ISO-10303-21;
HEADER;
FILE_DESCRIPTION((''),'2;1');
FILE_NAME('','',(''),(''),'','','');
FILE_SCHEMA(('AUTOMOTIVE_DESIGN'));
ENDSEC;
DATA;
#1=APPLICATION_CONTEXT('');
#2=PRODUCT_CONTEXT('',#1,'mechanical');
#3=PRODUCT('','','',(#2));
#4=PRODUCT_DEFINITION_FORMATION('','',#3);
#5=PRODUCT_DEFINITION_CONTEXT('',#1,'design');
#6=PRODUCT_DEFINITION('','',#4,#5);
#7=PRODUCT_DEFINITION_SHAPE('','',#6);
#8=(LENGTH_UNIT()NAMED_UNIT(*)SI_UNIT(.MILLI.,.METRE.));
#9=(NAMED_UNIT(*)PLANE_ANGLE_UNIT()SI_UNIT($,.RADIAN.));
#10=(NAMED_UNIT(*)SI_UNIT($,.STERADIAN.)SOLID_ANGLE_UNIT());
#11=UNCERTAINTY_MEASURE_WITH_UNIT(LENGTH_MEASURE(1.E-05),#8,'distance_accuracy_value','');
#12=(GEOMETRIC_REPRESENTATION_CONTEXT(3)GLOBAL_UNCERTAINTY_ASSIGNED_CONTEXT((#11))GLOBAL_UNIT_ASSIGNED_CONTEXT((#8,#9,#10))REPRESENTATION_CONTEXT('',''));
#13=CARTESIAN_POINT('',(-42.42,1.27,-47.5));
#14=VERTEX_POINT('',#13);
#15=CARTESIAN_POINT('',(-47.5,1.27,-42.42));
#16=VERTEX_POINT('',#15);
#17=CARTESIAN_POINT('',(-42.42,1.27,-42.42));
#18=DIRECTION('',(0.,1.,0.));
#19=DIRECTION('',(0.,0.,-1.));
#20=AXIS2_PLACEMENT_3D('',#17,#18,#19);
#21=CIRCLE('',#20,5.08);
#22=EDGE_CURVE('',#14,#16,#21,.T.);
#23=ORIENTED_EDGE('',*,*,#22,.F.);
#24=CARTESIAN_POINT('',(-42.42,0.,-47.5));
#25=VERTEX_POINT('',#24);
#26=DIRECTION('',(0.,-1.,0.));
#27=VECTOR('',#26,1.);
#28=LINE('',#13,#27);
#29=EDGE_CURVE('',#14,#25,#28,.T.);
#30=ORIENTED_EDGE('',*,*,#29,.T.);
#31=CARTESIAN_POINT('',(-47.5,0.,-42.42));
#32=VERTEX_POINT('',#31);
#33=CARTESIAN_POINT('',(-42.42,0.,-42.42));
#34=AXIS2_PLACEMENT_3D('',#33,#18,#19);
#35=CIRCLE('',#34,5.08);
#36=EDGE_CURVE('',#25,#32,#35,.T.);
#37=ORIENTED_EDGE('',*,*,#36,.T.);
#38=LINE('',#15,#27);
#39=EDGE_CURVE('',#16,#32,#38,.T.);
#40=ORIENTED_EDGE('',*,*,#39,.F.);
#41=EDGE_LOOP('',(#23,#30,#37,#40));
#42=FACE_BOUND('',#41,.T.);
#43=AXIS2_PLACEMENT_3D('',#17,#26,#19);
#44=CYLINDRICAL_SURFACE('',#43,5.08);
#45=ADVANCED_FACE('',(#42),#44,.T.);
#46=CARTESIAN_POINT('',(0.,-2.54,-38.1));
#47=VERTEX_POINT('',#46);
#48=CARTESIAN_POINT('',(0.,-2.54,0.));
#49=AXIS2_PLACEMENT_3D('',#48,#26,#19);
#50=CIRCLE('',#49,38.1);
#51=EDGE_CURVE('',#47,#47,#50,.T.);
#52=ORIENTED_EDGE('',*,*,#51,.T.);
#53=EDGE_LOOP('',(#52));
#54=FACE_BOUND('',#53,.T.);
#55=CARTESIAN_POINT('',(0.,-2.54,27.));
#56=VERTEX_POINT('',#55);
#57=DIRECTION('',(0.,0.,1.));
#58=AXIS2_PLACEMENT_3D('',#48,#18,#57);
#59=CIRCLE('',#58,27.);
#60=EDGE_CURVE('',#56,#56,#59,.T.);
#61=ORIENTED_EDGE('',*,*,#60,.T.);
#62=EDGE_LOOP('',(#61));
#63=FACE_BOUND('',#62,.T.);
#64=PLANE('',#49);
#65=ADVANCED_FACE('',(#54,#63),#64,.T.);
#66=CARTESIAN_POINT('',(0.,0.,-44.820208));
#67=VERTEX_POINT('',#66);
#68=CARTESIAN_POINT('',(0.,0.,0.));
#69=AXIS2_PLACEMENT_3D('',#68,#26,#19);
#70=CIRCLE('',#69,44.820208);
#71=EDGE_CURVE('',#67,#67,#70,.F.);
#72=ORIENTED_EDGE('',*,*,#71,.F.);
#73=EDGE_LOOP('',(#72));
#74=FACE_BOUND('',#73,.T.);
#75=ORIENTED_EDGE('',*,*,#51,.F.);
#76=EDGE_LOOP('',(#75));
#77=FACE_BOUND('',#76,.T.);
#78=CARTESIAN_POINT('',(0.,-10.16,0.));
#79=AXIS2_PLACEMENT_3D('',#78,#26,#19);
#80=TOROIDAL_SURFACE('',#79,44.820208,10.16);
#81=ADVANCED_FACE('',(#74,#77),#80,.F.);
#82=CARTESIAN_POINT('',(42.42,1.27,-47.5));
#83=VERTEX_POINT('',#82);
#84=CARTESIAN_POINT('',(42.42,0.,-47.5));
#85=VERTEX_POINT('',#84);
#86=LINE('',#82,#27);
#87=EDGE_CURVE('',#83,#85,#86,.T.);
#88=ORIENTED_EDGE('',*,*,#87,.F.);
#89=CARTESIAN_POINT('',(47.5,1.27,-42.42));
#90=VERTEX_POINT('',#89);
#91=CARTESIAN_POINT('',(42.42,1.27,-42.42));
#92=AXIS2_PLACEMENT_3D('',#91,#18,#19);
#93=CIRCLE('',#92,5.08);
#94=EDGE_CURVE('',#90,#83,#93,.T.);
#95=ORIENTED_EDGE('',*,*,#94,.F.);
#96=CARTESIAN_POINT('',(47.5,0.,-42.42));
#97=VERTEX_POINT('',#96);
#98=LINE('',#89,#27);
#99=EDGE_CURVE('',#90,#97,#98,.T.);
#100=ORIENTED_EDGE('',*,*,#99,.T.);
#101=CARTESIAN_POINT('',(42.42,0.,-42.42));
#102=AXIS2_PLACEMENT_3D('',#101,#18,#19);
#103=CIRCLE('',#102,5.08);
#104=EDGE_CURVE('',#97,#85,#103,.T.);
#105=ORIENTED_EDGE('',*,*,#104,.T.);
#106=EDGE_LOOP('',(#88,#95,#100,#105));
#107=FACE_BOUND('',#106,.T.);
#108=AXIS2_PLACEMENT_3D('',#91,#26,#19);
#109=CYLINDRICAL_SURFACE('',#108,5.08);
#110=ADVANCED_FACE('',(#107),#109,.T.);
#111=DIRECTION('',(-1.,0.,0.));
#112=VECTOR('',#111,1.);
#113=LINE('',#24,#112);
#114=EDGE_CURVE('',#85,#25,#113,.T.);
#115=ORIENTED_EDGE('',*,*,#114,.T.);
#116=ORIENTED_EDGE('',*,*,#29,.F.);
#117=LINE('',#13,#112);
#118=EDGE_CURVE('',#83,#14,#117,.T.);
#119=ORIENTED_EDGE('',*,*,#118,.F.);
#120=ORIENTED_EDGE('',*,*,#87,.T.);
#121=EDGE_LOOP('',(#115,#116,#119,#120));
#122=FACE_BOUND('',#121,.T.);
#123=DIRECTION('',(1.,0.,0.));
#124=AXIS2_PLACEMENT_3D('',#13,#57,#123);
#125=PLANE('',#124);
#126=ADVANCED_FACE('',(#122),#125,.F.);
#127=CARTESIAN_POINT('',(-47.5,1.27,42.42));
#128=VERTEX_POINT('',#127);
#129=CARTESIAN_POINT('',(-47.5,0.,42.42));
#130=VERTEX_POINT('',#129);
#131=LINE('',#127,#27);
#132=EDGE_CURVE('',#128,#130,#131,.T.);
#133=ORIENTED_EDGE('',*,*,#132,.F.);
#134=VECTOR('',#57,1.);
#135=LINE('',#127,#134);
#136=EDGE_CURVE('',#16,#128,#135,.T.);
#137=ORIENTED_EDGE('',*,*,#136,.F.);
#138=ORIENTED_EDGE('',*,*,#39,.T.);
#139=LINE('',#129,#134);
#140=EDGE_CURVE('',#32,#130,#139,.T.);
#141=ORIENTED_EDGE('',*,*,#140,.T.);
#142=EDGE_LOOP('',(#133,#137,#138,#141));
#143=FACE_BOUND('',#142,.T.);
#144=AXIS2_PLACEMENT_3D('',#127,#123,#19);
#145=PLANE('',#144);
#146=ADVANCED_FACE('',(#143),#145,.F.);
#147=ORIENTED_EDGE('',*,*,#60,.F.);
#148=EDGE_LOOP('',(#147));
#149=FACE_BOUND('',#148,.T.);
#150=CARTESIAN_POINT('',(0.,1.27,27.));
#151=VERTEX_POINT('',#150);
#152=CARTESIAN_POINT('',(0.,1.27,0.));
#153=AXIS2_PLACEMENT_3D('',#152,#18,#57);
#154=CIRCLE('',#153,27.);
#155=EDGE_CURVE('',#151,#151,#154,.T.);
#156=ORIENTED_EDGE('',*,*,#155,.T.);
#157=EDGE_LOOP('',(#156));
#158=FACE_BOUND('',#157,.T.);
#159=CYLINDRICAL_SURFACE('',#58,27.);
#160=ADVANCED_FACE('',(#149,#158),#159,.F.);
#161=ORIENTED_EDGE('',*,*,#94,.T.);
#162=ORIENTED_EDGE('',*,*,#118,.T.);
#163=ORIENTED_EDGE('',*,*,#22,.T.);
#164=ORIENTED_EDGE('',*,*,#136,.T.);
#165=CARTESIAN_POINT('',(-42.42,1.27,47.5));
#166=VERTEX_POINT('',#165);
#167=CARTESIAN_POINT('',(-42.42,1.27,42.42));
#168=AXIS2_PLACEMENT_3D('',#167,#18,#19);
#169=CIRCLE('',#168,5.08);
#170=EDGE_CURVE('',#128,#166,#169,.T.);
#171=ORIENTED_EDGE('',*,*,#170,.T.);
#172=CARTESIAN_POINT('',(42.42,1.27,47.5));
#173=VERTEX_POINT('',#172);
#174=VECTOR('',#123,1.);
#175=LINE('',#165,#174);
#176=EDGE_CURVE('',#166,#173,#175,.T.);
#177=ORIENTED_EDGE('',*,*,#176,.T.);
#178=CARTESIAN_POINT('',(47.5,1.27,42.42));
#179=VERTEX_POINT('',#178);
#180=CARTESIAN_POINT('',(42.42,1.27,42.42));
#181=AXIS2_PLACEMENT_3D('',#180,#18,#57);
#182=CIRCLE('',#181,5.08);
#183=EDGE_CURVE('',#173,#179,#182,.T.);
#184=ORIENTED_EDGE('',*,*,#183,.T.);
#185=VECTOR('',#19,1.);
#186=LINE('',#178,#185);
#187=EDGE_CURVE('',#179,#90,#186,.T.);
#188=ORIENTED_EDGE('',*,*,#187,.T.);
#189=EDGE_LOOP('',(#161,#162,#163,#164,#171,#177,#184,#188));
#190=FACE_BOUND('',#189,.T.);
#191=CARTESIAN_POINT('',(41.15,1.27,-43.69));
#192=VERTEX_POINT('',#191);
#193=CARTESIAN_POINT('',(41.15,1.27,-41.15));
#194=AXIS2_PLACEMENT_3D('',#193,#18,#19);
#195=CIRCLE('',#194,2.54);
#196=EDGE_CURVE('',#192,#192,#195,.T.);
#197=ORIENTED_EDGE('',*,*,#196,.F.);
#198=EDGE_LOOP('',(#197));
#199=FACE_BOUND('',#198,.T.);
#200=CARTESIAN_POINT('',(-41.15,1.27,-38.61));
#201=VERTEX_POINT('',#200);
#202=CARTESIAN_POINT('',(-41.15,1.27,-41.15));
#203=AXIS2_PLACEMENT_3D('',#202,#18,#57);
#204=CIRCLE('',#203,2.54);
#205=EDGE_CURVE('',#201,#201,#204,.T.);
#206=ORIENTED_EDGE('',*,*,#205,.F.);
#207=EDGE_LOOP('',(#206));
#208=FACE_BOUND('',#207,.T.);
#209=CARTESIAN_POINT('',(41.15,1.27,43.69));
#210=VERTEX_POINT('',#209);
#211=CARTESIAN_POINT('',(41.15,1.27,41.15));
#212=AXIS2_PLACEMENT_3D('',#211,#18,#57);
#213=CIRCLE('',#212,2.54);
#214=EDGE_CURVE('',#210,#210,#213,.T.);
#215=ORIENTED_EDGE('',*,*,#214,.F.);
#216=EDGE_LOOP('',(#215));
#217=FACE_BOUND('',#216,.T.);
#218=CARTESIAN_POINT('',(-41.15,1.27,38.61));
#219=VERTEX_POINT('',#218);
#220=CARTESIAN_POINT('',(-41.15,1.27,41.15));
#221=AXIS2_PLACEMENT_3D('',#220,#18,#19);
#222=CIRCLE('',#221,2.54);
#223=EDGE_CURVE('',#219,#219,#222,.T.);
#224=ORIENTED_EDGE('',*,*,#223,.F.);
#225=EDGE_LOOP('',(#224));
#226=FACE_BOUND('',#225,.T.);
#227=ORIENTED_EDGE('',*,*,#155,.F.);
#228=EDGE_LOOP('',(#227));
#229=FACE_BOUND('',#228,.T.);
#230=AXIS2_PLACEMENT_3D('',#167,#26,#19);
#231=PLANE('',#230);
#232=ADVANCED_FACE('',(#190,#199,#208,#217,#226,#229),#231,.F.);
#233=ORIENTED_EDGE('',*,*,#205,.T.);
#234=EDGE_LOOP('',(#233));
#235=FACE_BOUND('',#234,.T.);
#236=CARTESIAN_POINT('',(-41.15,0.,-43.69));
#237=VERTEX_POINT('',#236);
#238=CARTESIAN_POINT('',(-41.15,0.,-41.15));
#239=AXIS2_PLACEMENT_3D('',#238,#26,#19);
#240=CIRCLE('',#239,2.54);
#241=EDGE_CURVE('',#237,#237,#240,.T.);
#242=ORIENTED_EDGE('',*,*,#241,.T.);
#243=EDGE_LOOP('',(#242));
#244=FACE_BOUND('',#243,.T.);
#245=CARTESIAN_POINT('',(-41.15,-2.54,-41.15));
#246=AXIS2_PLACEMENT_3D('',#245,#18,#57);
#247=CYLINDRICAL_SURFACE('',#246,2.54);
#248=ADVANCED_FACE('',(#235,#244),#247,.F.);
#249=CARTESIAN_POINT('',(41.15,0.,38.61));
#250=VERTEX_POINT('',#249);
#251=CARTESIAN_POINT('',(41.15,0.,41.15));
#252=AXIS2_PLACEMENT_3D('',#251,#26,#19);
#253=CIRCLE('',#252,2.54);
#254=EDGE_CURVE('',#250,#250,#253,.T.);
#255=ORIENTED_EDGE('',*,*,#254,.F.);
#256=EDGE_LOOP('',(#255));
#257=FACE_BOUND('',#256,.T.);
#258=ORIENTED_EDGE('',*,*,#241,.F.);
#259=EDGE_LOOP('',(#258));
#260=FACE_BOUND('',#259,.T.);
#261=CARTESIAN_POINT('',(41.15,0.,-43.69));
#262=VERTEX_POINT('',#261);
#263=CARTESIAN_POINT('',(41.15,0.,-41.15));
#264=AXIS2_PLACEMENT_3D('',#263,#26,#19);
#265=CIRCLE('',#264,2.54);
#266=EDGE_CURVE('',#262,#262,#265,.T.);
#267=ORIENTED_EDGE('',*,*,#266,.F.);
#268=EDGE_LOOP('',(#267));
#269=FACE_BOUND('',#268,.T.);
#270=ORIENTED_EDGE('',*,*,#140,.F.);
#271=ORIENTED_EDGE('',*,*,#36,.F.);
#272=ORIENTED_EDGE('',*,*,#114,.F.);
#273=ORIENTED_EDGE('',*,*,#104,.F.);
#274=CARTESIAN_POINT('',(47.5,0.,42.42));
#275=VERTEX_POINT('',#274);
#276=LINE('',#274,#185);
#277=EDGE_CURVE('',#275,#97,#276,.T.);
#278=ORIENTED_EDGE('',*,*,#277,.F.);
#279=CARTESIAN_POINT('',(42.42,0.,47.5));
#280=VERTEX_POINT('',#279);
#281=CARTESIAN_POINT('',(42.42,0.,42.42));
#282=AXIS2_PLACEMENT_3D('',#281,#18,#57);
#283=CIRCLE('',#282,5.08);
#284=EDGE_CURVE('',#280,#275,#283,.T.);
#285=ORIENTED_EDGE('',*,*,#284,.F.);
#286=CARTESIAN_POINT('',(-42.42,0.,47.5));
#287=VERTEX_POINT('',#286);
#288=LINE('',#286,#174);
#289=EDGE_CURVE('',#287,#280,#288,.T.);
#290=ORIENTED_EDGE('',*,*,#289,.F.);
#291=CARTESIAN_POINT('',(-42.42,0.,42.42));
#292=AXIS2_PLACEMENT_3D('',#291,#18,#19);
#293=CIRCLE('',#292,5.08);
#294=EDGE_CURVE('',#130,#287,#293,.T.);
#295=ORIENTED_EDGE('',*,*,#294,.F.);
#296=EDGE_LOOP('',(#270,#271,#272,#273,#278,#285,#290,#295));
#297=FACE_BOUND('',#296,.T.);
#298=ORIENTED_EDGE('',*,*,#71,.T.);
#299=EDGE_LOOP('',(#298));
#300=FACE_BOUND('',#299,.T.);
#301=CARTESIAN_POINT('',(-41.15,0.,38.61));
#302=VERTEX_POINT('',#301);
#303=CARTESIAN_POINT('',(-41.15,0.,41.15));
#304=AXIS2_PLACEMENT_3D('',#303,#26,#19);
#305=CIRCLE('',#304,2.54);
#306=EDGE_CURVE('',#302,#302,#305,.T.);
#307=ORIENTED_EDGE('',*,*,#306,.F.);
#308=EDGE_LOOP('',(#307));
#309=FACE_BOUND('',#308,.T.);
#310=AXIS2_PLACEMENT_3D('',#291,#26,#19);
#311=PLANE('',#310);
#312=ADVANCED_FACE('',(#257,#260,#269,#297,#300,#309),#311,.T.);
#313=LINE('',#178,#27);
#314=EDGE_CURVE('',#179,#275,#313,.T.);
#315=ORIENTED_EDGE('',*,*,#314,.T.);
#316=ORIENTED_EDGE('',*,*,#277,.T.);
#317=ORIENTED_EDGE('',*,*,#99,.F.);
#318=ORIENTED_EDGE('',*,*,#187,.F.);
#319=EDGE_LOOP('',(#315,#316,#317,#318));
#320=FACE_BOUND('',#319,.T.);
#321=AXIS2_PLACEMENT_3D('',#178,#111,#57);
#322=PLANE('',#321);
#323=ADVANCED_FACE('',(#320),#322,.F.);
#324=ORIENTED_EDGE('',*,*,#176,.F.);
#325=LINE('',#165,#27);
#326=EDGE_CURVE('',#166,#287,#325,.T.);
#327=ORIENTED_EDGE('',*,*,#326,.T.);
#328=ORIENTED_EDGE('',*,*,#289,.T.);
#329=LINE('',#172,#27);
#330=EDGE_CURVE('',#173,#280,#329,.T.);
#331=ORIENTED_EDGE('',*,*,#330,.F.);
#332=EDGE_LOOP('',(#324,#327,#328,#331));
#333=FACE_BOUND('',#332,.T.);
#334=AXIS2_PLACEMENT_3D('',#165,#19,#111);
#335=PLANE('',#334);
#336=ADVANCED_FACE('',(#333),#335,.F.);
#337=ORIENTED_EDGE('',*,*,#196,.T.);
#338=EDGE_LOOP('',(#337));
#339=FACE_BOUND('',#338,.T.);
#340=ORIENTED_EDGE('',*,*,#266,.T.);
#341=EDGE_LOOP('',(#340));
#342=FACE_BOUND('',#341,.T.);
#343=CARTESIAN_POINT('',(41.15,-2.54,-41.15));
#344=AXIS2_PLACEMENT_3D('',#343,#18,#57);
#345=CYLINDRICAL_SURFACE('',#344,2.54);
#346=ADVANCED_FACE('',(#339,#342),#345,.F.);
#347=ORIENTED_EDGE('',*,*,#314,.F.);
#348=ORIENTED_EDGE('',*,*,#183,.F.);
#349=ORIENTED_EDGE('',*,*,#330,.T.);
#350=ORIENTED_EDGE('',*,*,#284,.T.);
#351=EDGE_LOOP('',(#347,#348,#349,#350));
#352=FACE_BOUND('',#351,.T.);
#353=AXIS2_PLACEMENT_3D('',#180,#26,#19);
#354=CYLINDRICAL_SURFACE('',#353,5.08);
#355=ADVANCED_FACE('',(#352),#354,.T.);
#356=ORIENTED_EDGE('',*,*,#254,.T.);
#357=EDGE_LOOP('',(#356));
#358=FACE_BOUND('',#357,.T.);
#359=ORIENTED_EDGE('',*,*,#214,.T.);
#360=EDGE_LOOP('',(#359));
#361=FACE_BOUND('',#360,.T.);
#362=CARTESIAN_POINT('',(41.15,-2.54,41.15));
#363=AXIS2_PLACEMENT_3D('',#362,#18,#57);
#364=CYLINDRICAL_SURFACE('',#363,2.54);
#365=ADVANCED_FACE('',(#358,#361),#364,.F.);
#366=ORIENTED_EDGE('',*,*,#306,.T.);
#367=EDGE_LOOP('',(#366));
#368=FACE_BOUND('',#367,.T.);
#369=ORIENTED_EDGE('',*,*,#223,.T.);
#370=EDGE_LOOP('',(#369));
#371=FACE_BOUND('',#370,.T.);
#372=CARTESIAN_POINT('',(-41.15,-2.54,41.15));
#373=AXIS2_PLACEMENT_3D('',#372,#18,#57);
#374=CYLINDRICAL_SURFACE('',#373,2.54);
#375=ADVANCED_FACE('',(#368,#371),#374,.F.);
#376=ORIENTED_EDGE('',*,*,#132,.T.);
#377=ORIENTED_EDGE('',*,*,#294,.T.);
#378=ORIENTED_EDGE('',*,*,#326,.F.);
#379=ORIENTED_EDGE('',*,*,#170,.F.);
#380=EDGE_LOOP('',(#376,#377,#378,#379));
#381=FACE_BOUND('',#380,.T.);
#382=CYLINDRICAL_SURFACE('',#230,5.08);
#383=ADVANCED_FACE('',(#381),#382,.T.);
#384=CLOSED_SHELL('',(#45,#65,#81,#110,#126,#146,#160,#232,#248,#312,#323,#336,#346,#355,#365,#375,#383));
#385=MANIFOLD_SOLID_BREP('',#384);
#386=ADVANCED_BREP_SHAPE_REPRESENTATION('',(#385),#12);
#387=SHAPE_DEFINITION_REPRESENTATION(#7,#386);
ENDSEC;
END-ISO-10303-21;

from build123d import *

# Parameters (mm, degrees)
BOSS_EXTRUDE1_DEPTH = 1.27
SKETCH2_R           = 38.1
BOSS_EXTRUDE2_DEPTH = 2.54
FILLET1_R           = 10.16
SKETCH3_R           = 27
CUT_EXTRUDE1_DEPTH  = 68.28310412
SKETCH4_R           = 2.54
CUT_EXTRUDE2_DEPTH  = 68.28310412


with BuildPart() as part:
    # Sketch1 → Boss-Extrude1 (new body)
    with BuildSketch(Plane(origin=(0, 0, 0), x_dir=(1, 0, 0), z_dir=(0, 1, 0))):
        with BuildLine():
            Line((-42.42, -47.5), (42.42, -47.5))
            ThreePointArc((42.42, -47.5), (46.012102448, -46.012102448), (47.5, -42.42))
            Line((47.5, -42.42), (47.5, 42.42))
            ThreePointArc((47.5, 42.42), (46.012102448, 46.012102448), (42.42, 47.5))
            Line((42.42, 47.5), (-42.42, 47.5))
            ThreePointArc((-42.42, 47.5), (-46.012102448, 46.012102448), (-47.5, 42.42))
            Line((-47.5, 42.42), (-47.5, -42.42))
            ThreePointArc((-47.5, -42.42), (-46.012102448, -46.012102448), (-42.42, -47.5))
        make_face()
    extrude(amount=BOSS_EXTRUDE1_DEPTH)

    # Sketch2 → Boss-Extrude2 (add)
    with BuildSketch(Plane.XZ):
        with Locations(Location((0, 0, 0), (0, 0, 270))):
            Circle(SKETCH2_R)
    extrude(amount=BOSS_EXTRUDE2_DEPTH)

    # Fillet1
    # the kernel refuses this fillet: 10.16 mm, written as the material it adds along each edge
    with BuildSketch(Plane(origin=(0, 0, 0), x_dir=(0, 0, -1), z_dir=(-1, 0, 0))) as fillet1_piece_1:
        with BuildLine():
            CenterArc((44.82020833, 10.16), FILLET1_R, 228.590377891, 41.409622109)
            Line((38.1, 2.54), (38.1, 0))
            Line((38.1, 0), (44.82020833, 0))
        make_face()
    revolve(axis=Axis((0, 0, 0), (0, -1, 0)))

    # Sketch3 → Cut-Extrude1 (cut, through all)
    with BuildSketch(Plane(origin=(0, 1.27, 0), x_dir=(1, 0, 0), z_dir=(0, 1, 0))):
        with Locations(Location((0, 0, 0), (0, 0, 270))):
            Circle(SKETCH3_R)
    extrude(amount=-CUT_EXTRUDE1_DEPTH, mode=Mode.SUBTRACT)

    # Sketch4 → Cut-Extrude2 (cut, through all)
    with BuildSketch(Plane(origin=(0, 1.27, 0), x_dir=(1, 0, 0), z_dir=(0, 1, 0))):
        with Locations(Location((-41.15, 41.15, 0), (0, 0, 270))):
            Circle(SKETCH4_R)
        with Locations(Location((41.15, 41.15, 0), (0, 0, 90))):
            Circle(SKETCH4_R)
        with Locations(Location((-41.15, -41.15, 0), (0, 0, 90))):
            Circle(SKETCH4_R)
        with Locations(Location((41.15, -41.15, 0), (0, 0, 270))):
            Circle(SKETCH4_R)
    extrude(amount=-CUT_EXTRUDE2_DEPTH, mode=Mode.SUBTRACT)


solid = part.part
